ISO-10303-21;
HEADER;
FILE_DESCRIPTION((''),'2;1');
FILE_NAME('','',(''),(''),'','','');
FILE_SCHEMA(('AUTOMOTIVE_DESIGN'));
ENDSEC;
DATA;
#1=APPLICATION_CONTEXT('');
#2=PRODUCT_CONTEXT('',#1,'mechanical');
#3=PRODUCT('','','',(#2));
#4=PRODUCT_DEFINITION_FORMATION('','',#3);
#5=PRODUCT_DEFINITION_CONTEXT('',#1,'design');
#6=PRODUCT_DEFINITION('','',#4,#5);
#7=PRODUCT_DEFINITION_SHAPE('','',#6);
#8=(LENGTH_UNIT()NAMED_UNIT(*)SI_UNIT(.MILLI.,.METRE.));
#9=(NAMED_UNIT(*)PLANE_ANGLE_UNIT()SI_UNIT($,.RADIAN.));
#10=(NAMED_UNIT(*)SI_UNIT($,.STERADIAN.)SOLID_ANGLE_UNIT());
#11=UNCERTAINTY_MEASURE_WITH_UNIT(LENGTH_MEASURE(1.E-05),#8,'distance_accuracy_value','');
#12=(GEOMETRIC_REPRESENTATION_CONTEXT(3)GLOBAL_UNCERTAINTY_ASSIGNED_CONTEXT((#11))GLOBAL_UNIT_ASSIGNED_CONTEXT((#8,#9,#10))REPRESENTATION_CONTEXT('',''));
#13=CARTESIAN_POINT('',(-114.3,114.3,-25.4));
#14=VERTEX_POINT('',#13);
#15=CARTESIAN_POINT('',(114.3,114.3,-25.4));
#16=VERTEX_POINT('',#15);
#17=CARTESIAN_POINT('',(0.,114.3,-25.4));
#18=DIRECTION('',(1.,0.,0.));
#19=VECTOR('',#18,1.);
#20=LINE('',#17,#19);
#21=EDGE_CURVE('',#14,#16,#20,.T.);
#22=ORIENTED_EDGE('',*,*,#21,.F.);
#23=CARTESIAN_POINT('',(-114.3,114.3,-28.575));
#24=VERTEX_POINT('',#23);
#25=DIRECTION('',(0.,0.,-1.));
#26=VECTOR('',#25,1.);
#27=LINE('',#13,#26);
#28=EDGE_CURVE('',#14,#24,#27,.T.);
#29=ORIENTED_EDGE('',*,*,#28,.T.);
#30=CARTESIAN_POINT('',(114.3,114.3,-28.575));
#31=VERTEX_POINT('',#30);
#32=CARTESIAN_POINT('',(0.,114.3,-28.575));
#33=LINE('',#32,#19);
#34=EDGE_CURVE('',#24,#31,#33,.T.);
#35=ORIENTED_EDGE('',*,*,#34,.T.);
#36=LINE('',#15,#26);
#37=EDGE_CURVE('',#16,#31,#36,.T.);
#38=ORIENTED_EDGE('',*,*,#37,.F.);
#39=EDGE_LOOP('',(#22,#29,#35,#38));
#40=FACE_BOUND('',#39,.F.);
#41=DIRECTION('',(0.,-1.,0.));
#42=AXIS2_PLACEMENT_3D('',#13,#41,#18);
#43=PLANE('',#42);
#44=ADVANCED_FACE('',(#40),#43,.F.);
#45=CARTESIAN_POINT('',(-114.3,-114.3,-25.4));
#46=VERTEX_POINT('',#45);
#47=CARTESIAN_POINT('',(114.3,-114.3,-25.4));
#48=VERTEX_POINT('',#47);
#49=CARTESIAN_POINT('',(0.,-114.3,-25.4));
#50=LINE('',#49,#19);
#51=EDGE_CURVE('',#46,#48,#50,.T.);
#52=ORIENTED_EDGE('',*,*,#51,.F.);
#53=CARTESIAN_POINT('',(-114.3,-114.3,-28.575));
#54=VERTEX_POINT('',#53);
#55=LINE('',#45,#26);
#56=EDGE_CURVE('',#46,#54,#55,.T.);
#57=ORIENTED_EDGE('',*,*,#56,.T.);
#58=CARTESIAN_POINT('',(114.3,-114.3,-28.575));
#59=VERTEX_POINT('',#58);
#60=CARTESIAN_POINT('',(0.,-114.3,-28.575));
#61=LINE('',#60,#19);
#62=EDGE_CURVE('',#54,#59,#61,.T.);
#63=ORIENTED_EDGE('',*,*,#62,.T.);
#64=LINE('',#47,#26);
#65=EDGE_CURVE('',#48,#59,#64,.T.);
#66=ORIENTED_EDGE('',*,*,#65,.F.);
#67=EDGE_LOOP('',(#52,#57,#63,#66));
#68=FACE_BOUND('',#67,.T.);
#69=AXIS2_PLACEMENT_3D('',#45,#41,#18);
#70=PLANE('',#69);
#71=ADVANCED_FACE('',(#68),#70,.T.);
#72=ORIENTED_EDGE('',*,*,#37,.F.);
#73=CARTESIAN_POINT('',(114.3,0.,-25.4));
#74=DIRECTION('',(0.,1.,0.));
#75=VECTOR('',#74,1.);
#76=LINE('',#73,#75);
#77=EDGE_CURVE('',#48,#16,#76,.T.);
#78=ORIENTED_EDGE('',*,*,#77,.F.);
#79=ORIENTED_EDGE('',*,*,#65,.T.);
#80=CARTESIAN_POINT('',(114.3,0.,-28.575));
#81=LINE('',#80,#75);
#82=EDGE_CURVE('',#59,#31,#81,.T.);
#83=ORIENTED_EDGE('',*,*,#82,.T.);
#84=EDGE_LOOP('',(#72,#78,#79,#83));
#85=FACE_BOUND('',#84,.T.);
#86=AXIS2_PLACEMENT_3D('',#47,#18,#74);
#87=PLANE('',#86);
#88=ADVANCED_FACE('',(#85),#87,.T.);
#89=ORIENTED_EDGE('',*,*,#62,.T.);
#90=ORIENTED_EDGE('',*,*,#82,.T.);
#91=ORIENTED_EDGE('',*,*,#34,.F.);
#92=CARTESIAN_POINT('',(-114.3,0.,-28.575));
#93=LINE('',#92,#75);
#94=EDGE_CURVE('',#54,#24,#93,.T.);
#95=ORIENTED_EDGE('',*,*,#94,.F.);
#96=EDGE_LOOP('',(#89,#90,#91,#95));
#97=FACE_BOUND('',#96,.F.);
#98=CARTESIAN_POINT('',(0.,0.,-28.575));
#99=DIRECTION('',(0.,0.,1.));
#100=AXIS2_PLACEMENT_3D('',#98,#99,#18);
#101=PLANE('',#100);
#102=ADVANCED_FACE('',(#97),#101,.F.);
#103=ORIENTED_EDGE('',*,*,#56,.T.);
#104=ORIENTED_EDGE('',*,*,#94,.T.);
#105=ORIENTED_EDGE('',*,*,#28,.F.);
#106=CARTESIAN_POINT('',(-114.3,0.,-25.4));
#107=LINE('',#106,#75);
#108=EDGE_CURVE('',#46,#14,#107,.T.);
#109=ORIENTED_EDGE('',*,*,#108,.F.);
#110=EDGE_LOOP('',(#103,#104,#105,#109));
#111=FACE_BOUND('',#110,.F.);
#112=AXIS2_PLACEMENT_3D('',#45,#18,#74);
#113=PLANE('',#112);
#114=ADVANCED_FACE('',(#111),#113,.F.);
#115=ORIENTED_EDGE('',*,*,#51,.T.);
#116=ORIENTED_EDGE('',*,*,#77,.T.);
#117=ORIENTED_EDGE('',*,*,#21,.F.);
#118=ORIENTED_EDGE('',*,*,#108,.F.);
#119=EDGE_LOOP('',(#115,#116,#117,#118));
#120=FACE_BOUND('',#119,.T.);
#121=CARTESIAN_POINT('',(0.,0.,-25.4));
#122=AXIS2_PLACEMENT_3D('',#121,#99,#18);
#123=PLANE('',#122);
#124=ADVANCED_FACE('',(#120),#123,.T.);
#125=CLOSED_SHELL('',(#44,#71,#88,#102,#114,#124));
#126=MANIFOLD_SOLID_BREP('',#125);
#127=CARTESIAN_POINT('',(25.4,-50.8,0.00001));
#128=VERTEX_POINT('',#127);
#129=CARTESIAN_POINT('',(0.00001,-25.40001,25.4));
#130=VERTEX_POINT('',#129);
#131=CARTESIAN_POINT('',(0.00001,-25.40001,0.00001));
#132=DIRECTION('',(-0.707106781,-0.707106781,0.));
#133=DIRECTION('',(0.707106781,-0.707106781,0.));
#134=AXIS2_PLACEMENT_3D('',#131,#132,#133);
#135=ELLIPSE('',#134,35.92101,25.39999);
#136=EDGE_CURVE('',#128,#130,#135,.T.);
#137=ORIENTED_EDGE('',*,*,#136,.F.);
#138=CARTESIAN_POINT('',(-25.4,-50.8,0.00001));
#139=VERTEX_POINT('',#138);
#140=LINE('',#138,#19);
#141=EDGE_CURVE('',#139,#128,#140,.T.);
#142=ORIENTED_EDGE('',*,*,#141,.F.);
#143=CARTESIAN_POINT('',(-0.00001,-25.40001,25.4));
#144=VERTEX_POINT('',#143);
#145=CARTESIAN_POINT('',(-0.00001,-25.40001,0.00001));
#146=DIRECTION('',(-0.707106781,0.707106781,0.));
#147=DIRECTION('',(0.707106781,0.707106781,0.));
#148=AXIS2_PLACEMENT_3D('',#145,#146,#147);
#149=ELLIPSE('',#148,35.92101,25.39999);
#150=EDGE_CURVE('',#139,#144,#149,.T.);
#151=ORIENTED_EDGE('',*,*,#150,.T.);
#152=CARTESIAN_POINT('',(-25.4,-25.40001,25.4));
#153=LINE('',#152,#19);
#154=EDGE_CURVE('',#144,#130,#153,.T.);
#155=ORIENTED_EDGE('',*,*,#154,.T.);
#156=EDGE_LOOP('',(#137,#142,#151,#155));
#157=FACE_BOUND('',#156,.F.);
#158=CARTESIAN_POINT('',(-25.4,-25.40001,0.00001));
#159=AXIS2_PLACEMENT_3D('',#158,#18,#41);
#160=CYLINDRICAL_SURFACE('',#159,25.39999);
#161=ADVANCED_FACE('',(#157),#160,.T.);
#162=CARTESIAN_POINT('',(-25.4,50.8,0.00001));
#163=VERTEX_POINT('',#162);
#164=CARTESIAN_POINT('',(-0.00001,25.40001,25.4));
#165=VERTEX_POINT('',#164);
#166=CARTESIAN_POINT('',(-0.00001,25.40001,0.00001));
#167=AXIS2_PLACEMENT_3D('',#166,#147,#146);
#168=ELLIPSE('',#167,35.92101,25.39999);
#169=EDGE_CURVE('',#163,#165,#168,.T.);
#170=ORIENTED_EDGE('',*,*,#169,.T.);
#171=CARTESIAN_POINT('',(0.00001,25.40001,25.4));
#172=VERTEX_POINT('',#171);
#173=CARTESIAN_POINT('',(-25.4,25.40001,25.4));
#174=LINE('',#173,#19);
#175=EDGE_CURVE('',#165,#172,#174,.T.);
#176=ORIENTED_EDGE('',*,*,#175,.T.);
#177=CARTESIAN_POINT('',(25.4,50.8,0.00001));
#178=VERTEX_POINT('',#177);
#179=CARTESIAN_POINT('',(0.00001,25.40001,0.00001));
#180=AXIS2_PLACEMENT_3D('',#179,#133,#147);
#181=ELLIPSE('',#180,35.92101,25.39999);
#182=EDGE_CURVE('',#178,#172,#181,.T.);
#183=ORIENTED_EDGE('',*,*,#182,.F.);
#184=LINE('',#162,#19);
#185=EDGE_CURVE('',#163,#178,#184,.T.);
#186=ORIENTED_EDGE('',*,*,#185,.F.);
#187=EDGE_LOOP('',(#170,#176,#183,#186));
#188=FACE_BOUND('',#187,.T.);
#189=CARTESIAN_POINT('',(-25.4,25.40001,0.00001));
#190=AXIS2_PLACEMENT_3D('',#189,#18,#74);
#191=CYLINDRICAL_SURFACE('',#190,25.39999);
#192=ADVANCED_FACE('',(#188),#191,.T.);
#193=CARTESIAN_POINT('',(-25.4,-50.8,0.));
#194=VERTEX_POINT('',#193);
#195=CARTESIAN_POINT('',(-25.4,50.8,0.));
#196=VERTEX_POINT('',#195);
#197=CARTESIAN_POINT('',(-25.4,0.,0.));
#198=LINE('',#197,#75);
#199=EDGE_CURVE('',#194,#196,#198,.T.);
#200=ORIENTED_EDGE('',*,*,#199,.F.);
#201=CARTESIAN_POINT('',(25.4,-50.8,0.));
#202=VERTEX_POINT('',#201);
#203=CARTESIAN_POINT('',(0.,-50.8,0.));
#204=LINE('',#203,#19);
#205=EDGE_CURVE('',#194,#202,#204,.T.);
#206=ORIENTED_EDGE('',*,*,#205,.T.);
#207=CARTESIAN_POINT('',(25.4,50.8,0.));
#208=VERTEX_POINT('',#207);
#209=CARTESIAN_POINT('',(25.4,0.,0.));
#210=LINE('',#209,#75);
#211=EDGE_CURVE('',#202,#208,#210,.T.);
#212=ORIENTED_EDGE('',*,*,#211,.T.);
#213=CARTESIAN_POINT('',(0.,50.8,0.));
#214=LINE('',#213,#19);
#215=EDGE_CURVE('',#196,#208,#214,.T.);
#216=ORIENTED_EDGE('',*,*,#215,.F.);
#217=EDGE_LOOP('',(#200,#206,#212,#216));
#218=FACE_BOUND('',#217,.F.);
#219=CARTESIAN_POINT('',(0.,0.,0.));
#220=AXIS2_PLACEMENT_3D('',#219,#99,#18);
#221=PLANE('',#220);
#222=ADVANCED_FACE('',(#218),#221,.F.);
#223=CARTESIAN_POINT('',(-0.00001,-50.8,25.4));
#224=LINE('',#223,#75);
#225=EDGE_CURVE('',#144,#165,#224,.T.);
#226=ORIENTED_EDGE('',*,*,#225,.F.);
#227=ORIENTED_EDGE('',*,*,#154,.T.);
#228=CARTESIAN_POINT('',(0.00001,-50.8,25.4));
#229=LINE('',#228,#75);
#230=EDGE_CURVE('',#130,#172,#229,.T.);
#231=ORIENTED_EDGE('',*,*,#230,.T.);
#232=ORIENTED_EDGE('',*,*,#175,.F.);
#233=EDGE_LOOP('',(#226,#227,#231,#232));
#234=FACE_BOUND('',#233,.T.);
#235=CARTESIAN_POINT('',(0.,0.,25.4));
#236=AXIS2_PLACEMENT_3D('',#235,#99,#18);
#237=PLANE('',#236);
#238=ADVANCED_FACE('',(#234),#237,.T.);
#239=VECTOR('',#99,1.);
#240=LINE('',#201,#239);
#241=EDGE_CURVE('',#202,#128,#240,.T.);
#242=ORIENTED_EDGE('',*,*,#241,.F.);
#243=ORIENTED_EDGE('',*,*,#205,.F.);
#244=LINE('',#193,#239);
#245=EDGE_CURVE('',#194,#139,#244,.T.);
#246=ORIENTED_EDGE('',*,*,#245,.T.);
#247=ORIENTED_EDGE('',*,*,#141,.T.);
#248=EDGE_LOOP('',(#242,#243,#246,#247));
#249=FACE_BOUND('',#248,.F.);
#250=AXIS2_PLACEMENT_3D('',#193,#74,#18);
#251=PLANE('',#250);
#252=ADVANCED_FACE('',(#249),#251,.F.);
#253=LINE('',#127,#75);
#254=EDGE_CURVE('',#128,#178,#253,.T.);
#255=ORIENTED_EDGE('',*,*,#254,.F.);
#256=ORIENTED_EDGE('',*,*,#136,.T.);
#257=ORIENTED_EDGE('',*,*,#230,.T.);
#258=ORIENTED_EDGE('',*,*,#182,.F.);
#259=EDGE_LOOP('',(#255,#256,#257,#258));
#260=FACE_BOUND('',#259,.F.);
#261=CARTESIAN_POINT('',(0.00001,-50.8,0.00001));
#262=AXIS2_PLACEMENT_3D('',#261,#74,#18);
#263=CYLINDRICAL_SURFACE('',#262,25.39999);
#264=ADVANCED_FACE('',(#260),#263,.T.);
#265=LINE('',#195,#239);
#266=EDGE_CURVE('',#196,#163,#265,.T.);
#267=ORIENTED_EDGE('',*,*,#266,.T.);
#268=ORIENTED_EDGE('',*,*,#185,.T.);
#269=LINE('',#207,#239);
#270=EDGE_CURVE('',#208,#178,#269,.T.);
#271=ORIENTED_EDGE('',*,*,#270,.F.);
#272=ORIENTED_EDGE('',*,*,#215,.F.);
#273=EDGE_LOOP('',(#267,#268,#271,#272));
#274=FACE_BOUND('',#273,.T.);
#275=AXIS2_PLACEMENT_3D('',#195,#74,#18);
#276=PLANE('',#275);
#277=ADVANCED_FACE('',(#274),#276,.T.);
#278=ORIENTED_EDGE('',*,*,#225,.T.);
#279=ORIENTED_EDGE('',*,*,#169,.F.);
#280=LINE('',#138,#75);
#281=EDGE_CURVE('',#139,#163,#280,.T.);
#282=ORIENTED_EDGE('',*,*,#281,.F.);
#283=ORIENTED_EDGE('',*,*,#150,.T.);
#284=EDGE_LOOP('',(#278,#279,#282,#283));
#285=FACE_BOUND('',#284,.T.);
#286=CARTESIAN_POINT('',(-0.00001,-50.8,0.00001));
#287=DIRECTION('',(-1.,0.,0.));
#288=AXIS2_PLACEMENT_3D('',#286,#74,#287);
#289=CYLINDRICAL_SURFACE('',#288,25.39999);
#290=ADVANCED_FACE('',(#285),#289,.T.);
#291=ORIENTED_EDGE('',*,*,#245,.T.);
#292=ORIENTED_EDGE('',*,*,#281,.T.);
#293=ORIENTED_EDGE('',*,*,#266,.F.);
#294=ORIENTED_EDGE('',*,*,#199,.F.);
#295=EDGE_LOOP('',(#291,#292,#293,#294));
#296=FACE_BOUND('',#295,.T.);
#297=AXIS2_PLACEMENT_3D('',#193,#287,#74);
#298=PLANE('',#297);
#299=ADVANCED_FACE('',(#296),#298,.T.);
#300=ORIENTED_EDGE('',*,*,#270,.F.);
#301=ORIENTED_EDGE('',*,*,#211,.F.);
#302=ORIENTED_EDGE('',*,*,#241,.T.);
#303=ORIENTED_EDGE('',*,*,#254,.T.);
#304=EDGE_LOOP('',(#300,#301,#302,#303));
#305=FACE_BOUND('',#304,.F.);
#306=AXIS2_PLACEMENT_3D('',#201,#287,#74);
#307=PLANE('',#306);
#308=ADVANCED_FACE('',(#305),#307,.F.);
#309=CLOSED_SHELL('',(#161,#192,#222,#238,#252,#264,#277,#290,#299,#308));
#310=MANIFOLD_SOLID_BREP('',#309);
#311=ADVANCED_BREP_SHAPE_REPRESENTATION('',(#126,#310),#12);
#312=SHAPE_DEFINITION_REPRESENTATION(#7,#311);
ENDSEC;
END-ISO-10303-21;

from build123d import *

# Parameters (mm, degrees)
F0_W     = 50.8
F0_H     = 101.6
F1_DEPTH = 25.4
F2_R     = 25.39999
F4_W     = 228.6
F4_H     = 228.6
F5_DEPTH = 3.175


# Not quite as in the source:
# - a fillet or chamfer is up to 0.001 mm smaller than in the source, because OpenCascade refuses the exact size


with BuildPart() as f1:
    # F0 (on Top) → F1 (new body)
    with BuildSketch(Plane.XY):
        Rectangle(F0_W, F0_H)
    extrude(amount=F1_DEPTH)

    # F2 (radius 25.4 in the source; OpenCascade refuses exactly that, so slightly less here)
    f2_edges = [f1.edges().sort_by_distance(p)[0] for p in [
        (-25.4, 0, 25.4),
        (0, -50.8, 25.4),
        (25.4, 0, 25.4),
        (0, 50.8, 25.4),
    ]]
    fillet(f2_edges, radius=F2_R)


with BuildPart() as f5:
    # F4 (on offset) → F5 (new body)
    with BuildSketch(Plane.XY.offset(-25.4)):
        Rectangle(F4_W, F4_H)
    extrude(amount=-F5_DEPTH)


solid = Compound([f1.part, f5.part])
